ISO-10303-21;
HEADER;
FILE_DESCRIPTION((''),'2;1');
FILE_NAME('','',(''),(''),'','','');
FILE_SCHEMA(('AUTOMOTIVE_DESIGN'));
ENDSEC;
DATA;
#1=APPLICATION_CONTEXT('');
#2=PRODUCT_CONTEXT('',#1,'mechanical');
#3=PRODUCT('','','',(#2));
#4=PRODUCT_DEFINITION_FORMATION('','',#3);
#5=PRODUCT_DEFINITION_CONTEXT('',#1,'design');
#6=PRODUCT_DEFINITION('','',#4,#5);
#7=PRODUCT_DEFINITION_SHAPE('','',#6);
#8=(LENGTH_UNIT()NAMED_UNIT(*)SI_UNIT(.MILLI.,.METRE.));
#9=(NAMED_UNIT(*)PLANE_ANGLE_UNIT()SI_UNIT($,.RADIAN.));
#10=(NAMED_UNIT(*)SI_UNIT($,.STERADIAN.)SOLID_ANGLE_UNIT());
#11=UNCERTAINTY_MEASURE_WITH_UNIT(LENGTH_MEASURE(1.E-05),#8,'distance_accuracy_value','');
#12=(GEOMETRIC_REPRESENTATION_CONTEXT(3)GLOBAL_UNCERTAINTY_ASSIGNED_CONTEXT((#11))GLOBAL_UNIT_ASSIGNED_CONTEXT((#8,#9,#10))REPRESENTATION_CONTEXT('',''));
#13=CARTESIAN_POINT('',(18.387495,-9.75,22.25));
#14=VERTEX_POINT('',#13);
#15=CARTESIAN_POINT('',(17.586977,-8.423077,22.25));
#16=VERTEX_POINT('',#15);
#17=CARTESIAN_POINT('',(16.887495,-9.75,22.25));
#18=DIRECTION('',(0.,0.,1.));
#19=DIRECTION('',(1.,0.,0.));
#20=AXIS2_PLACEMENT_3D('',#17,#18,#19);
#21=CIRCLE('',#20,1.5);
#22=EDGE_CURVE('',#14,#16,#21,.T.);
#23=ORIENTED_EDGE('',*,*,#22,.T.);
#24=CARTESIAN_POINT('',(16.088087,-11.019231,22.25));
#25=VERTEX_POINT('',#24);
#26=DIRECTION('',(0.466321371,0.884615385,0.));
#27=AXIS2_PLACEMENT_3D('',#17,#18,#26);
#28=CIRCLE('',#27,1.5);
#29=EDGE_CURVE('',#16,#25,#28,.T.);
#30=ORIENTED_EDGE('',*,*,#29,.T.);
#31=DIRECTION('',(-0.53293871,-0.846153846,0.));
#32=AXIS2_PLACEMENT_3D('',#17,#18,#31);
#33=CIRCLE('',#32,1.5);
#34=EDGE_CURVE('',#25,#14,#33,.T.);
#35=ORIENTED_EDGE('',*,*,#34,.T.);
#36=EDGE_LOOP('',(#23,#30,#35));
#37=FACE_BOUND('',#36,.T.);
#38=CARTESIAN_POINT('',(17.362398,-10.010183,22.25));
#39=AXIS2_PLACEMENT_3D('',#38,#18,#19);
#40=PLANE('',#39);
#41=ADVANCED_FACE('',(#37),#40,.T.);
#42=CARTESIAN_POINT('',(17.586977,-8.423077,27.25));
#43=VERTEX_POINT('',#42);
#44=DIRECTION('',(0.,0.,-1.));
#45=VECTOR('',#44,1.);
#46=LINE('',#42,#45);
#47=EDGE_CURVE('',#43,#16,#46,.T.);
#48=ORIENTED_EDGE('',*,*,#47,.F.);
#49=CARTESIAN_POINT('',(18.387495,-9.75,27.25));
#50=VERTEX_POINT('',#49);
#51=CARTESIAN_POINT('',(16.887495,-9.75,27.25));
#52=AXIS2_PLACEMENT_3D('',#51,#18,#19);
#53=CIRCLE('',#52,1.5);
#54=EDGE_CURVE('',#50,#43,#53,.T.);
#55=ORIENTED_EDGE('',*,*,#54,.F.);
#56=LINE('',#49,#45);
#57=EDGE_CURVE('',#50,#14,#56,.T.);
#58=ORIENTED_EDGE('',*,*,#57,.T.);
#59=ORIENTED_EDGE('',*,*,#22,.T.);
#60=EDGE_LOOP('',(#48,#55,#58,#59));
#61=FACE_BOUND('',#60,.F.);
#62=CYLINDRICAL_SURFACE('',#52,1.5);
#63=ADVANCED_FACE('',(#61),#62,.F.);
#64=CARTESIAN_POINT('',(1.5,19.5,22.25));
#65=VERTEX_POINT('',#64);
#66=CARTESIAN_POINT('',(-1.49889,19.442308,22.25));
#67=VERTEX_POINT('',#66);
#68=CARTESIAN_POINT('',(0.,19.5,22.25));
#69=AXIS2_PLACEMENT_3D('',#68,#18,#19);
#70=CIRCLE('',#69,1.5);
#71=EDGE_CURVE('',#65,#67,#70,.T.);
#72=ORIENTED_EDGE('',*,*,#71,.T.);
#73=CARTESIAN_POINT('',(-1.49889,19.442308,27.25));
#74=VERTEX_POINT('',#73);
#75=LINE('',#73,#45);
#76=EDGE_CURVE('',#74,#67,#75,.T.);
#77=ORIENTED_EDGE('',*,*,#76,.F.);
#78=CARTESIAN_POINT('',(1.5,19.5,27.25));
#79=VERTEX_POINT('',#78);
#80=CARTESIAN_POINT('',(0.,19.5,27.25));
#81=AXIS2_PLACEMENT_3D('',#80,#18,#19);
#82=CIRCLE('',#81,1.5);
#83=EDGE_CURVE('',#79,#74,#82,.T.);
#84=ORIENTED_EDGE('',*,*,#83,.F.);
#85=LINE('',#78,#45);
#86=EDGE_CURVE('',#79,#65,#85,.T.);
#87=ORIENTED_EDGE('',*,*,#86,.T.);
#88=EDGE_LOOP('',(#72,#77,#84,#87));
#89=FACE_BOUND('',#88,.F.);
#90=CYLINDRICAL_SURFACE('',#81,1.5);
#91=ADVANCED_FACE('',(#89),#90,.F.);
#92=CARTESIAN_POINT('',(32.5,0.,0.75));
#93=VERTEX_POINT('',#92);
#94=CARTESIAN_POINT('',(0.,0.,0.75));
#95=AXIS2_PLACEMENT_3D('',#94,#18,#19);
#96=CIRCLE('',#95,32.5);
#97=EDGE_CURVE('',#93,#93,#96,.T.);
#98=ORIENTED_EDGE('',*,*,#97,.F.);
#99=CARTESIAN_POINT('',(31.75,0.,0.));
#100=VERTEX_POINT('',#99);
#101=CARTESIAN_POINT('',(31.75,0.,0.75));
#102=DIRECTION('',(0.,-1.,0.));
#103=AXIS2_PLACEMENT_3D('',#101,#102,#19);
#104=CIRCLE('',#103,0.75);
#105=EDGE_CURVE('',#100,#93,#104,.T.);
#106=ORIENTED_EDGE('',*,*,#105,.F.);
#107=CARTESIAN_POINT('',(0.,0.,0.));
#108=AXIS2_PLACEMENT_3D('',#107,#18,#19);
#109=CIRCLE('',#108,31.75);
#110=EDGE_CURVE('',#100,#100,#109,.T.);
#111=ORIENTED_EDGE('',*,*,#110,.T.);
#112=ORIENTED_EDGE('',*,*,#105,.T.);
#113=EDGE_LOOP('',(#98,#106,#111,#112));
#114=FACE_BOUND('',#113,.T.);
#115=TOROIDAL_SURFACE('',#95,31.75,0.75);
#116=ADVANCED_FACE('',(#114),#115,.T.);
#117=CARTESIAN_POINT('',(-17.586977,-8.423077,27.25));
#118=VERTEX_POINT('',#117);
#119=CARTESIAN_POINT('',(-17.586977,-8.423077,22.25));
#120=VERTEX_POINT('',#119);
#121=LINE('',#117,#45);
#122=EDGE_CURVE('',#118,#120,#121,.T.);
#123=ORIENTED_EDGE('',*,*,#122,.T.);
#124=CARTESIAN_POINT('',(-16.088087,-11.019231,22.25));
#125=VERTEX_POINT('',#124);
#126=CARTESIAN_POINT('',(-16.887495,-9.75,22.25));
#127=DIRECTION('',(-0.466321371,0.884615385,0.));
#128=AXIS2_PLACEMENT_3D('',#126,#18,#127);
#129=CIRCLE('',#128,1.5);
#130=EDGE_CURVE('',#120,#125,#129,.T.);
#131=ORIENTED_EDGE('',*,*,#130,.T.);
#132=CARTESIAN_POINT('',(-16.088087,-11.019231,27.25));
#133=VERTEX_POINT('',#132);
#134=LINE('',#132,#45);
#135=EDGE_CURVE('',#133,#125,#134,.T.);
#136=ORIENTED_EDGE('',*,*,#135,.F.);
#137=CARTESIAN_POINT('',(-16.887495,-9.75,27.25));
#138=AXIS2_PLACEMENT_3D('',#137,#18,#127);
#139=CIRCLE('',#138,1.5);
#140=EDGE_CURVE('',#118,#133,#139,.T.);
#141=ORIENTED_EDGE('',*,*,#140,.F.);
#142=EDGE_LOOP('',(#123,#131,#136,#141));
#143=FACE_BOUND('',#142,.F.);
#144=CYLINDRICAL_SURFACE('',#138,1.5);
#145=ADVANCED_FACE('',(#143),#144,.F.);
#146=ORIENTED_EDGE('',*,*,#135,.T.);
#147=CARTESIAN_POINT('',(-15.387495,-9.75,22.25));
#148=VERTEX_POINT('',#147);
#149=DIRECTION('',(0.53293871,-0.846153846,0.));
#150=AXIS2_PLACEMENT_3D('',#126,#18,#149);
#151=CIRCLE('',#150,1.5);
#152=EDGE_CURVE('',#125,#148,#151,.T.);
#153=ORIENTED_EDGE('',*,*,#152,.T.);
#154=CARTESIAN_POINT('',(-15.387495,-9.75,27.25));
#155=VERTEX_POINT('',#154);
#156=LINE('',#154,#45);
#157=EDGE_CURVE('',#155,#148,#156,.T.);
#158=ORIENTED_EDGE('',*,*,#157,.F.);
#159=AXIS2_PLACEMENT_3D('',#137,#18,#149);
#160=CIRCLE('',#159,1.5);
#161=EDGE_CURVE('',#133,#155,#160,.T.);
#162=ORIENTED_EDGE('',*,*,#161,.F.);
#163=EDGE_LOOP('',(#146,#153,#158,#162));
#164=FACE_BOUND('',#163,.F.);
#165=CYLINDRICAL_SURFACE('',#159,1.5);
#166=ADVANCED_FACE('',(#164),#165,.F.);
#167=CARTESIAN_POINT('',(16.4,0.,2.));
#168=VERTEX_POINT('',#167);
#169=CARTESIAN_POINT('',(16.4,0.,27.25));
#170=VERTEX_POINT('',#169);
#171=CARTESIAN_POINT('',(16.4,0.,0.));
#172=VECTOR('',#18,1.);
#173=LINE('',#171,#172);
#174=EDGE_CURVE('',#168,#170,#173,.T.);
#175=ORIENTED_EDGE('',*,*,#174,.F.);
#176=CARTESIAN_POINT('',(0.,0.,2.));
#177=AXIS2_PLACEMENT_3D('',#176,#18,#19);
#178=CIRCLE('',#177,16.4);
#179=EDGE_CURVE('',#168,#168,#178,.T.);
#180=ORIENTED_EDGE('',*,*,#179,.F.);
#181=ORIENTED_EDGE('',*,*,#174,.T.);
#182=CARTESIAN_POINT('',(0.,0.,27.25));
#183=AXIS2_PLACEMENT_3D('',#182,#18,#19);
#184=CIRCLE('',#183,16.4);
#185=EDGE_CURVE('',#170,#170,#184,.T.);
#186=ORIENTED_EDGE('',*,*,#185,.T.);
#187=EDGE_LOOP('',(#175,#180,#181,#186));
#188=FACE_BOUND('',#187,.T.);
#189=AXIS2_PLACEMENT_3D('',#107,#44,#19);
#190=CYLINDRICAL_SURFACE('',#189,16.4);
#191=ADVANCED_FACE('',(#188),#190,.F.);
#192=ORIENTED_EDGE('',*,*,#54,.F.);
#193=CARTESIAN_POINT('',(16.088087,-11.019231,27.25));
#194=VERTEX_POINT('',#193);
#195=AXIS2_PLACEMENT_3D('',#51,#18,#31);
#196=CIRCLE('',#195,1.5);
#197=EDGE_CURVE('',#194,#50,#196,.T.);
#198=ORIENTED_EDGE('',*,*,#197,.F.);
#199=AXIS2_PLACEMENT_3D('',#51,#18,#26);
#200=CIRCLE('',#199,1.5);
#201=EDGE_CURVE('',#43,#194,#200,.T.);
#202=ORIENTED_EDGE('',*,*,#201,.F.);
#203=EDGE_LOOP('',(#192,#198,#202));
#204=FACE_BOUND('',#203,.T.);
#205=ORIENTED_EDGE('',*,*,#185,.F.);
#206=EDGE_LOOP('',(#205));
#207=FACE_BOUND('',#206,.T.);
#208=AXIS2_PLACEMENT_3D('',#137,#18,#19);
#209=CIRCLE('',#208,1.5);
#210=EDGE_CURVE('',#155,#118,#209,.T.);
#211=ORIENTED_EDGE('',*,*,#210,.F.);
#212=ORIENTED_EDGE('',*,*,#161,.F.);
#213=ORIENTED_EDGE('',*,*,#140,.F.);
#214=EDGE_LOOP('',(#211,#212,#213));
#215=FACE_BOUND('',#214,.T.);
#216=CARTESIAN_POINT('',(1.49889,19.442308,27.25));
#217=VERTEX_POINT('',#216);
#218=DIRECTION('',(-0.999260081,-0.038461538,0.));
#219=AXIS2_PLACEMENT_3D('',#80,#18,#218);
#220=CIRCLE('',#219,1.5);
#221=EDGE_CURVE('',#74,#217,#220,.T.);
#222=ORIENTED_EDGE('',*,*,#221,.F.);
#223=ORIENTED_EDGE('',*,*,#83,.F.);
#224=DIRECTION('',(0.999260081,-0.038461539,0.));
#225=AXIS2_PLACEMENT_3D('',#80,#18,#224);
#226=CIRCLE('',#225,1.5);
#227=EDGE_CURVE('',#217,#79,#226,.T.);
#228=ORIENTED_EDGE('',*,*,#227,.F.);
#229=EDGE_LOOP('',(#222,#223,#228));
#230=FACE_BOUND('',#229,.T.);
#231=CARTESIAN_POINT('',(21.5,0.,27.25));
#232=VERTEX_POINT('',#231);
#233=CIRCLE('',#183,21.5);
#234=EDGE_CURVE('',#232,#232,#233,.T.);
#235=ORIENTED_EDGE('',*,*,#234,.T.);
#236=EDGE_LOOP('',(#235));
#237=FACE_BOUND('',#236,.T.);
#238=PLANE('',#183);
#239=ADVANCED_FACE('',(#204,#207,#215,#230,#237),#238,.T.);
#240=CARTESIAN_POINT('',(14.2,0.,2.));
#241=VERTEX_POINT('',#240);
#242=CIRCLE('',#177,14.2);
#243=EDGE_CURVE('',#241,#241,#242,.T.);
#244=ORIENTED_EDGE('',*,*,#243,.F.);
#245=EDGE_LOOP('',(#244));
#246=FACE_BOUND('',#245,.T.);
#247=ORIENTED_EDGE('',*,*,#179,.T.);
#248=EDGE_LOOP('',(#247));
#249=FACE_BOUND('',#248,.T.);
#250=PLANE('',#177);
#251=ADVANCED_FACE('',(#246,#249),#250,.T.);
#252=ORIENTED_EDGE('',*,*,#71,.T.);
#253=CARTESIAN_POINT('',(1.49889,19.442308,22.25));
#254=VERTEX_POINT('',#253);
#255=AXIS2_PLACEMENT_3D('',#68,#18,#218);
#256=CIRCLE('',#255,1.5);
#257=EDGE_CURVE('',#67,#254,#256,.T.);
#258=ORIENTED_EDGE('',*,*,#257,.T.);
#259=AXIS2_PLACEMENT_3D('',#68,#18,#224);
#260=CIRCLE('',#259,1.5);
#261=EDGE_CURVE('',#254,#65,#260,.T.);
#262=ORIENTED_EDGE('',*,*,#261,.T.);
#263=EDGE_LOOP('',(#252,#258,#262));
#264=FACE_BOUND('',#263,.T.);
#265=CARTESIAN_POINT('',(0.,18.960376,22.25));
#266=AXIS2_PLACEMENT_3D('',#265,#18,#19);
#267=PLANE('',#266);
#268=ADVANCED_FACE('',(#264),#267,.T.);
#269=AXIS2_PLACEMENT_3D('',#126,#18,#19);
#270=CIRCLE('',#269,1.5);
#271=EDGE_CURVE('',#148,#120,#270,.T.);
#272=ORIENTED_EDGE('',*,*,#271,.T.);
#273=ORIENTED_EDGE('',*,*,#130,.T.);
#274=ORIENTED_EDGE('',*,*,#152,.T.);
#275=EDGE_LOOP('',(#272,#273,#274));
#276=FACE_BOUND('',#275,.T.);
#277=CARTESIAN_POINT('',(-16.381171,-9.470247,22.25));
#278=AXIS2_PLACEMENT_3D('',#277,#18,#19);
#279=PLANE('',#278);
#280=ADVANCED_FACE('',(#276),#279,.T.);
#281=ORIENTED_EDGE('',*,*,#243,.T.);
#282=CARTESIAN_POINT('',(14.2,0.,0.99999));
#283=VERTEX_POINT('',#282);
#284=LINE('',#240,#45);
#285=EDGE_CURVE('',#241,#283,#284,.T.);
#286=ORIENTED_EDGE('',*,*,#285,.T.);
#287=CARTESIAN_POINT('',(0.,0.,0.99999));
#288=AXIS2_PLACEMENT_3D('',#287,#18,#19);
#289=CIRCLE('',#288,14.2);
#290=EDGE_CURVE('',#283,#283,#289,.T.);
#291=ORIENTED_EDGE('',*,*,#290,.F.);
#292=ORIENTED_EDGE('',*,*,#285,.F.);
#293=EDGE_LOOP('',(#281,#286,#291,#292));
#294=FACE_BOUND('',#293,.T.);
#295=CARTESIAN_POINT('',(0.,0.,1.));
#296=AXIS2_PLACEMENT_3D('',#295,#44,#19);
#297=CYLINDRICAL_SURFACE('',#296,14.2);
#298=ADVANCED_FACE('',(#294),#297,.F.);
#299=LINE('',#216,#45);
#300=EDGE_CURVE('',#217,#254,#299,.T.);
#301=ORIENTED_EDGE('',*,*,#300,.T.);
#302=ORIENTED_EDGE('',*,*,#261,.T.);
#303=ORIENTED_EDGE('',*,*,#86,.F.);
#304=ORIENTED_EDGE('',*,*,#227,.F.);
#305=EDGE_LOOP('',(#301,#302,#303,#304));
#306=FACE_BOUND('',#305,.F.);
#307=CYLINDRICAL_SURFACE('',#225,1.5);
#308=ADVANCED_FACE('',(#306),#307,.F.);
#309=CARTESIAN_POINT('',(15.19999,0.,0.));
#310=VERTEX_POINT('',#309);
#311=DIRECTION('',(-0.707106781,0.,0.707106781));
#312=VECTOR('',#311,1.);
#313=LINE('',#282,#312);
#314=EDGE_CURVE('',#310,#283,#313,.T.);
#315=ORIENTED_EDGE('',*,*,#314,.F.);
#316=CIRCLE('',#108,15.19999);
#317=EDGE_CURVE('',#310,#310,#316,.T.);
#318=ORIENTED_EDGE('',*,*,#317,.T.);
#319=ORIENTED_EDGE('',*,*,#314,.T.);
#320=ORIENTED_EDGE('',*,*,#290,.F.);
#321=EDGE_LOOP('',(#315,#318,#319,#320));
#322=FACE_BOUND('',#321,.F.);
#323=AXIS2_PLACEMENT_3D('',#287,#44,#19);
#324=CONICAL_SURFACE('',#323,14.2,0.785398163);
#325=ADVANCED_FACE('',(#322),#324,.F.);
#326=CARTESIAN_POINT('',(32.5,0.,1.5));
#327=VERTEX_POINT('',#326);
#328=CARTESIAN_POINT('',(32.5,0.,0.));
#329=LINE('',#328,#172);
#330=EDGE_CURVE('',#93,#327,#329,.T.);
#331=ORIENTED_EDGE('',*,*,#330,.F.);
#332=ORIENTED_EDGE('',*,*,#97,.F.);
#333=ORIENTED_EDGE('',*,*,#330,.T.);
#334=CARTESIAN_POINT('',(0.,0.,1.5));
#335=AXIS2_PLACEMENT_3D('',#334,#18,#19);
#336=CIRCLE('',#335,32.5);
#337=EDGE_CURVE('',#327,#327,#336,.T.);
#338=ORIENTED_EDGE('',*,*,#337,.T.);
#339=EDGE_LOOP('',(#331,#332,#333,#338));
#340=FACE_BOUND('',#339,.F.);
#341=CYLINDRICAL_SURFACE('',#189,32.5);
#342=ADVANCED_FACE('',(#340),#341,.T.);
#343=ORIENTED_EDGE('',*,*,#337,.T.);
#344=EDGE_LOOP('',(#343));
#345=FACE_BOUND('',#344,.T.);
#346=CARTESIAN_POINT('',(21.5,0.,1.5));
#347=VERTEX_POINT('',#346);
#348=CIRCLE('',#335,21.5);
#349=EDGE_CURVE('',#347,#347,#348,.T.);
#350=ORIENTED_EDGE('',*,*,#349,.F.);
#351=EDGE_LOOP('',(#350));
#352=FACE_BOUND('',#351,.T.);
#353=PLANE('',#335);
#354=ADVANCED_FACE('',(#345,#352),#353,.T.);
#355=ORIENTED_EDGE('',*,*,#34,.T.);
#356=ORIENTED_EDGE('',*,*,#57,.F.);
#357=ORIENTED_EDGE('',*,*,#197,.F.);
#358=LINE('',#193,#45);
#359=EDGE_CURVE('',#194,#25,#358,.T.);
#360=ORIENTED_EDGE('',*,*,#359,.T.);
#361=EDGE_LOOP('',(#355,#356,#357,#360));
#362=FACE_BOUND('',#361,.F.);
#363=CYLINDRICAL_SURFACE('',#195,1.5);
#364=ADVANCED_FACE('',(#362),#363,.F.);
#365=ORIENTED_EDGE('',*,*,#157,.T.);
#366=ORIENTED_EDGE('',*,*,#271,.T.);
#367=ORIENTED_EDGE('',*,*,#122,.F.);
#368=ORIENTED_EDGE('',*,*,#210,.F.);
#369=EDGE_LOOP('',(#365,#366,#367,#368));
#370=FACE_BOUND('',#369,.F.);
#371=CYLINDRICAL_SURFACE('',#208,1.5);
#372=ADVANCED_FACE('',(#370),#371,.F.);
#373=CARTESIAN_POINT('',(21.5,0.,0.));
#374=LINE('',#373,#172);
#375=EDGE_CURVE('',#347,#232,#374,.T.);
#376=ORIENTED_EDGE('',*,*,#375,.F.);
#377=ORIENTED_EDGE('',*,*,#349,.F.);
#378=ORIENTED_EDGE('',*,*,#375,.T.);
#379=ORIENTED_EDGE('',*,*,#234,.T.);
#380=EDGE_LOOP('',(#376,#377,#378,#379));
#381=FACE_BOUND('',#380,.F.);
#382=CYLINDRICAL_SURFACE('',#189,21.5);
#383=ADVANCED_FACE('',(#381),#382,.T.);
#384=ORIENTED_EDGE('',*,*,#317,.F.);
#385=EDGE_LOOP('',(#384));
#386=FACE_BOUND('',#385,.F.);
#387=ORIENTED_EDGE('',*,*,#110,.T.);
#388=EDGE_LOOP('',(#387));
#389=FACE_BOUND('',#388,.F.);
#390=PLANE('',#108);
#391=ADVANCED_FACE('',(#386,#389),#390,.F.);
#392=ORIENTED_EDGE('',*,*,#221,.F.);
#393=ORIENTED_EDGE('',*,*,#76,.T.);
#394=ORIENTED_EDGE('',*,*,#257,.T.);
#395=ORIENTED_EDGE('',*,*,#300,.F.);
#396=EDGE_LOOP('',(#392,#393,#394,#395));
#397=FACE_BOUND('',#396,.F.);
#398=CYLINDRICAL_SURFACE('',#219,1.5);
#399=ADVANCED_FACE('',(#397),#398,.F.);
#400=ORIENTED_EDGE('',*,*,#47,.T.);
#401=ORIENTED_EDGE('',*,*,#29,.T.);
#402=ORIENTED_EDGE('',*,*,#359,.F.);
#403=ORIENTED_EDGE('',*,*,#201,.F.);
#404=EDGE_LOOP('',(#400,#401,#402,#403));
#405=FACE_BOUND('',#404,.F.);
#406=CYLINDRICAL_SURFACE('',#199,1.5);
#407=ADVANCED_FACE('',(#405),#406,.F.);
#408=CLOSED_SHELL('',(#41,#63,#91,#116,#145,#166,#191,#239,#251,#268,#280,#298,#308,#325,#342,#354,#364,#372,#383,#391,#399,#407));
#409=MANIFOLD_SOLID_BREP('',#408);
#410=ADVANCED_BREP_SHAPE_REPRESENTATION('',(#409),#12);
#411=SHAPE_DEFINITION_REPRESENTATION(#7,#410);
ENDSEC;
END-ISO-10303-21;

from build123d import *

# Parameters (mm, degrees)
F0_R     = 21.5
F0_R_2   = 16.4
F1_DEPTH = 27.25
F0_R_3   = 32.5
F2_DEPTH = 1.5
F0_R_4   = 14.2
F3_DEPTH = 1
F5_DEPTH = 5
F6_R     = 0.75
F7_SIZE  = 0.99999
F8_DEPTH = 1


# Not quite as in the source:
# - a fillet or chamfer is up to 0.001 mm smaller than in the source, because OpenCascade refuses the exact size


with BuildPart() as f1:
    # F0 (on Top) → F1 (new body)
    with BuildSketch(Plane.XY):
        Circle(F0_R)
        Circle(F0_R_2, mode=Mode.SUBTRACT)
    extrude(amount=F1_DEPTH)

    # F0 (on Top) → F2 (join)
    with BuildSketch(Plane.XY):
        Circle(F0_R_3)
        Circle(F0_R, mode=Mode.SUBTRACT)
    extrude(amount=F2_DEPTH)

    # F0 (on Top) → F3 (join)
    with BuildSketch(Plane.XY):
        Circle(F0_R_2)
        Circle(F0_R_4, mode=Mode.SUBTRACT)
    extrude(amount=F3_DEPTH)

    # F4 (on face) → F5 (cut)
    with BuildSketch(Plane.XY.offset(27.25)):
        with BuildLine():
            ThreePointArc((-1.4988901219, 19.4423076923), (0, 18), (1.4988901219, 19.4423076923))
            ThreePointArc((1.4988901219, 19.4423076923), (0, 19.5), (-1.4988901219, 19.4423076923))
        make_face()
        with BuildLine():
            ThreePointArc((-1.4988901219, 19.4423076923), (0, 19.5), (1.4988901219, 19.4423076923))
            ThreePointArc((1.4988901219, 19.4423076923), (1.4997225048, 19.4711485087), (1.5, 19.5))
            ThreePointArc((1.5, 19.5), (-0.0288514913, 20.9997225048), (-1.4988901219, 19.4423076923))
        make_face()
        with BuildLine():
            ThreePointArc((18.3874953738, -9.75), (18.171867416, -8.9751526232), (17.5869774307, -8.4230769231))
            ThreePointArc((17.5869774307, -8.4230769231), (16.8874953738, -9.75), (16.0880873088, -11.0192307692))
            ThreePointArc((16.0880873088, -11.0192307692), (17.6123705018, -11.0632235334), (18.3874953738, -9.75))
        make_face()
        with BuildLine():
            ThreePointArc((16.0880873088, -11.0192307692), (16.8874953738, -9.75), (17.5869774307, -8.4230769231))
            ThreePointArc((17.5869774307, -8.4230769231), (15.5884572681, -9), (16.0880873088, -11.0192307692))
        make_face()
        with BuildLine():
            ThreePointArc((-15.3874953738, -9.75), (-16.112647997, -8.4656279578), (-17.5869774307, -8.4230769231))
            ThreePointArc((-17.5869774307, -8.4230769231), (-16.8874953738, -9.75), (-16.0880873088, -11.0192307692))
            ThreePointArc((-16.0880873088, -11.0192307692), (-15.5742718404, -10.474875128), (-15.3874953738, -9.75))
        make_face()
        with BuildLine():
            ThreePointArc((-16.0880873088, -11.0192307692), (-16.8874953738, -9.75), (-17.5869774307, -8.4230769231))
            ThreePointArc((-17.5869774307, -8.4230769231), (-18.1865334795, -10.5), (-16.0880873088, -11.0192307692))
        make_face()
    extrude(amount=-F5_DEPTH, mode=Mode.SUBTRACT)

    # F6
    f6_edges = [f1.edges().sort_by_distance(p)[0] for p in [
        (-32.5, 0, 0),
    ]]
    fillet(f6_edges, radius=F6_R)

    # F7 (size 1 in the source; OpenCascade refuses exactly that, so slightly less here)
    f7_edges = [f1.edges().sort_by_distance(p)[0] for p in [
        (-14.2, 0, 0),
    ]]
    chamfer(f7_edges, length=F7_SIZE)

    # F8 (add): a face of the model
    f8_faces = [f1.faces().sort_by_distance(p)[0] for p in [
        (-15.9361379515, 0, 1),
    ]]
    extrude(f8_faces, amount=F8_DEPTH)


solid = f1.part
